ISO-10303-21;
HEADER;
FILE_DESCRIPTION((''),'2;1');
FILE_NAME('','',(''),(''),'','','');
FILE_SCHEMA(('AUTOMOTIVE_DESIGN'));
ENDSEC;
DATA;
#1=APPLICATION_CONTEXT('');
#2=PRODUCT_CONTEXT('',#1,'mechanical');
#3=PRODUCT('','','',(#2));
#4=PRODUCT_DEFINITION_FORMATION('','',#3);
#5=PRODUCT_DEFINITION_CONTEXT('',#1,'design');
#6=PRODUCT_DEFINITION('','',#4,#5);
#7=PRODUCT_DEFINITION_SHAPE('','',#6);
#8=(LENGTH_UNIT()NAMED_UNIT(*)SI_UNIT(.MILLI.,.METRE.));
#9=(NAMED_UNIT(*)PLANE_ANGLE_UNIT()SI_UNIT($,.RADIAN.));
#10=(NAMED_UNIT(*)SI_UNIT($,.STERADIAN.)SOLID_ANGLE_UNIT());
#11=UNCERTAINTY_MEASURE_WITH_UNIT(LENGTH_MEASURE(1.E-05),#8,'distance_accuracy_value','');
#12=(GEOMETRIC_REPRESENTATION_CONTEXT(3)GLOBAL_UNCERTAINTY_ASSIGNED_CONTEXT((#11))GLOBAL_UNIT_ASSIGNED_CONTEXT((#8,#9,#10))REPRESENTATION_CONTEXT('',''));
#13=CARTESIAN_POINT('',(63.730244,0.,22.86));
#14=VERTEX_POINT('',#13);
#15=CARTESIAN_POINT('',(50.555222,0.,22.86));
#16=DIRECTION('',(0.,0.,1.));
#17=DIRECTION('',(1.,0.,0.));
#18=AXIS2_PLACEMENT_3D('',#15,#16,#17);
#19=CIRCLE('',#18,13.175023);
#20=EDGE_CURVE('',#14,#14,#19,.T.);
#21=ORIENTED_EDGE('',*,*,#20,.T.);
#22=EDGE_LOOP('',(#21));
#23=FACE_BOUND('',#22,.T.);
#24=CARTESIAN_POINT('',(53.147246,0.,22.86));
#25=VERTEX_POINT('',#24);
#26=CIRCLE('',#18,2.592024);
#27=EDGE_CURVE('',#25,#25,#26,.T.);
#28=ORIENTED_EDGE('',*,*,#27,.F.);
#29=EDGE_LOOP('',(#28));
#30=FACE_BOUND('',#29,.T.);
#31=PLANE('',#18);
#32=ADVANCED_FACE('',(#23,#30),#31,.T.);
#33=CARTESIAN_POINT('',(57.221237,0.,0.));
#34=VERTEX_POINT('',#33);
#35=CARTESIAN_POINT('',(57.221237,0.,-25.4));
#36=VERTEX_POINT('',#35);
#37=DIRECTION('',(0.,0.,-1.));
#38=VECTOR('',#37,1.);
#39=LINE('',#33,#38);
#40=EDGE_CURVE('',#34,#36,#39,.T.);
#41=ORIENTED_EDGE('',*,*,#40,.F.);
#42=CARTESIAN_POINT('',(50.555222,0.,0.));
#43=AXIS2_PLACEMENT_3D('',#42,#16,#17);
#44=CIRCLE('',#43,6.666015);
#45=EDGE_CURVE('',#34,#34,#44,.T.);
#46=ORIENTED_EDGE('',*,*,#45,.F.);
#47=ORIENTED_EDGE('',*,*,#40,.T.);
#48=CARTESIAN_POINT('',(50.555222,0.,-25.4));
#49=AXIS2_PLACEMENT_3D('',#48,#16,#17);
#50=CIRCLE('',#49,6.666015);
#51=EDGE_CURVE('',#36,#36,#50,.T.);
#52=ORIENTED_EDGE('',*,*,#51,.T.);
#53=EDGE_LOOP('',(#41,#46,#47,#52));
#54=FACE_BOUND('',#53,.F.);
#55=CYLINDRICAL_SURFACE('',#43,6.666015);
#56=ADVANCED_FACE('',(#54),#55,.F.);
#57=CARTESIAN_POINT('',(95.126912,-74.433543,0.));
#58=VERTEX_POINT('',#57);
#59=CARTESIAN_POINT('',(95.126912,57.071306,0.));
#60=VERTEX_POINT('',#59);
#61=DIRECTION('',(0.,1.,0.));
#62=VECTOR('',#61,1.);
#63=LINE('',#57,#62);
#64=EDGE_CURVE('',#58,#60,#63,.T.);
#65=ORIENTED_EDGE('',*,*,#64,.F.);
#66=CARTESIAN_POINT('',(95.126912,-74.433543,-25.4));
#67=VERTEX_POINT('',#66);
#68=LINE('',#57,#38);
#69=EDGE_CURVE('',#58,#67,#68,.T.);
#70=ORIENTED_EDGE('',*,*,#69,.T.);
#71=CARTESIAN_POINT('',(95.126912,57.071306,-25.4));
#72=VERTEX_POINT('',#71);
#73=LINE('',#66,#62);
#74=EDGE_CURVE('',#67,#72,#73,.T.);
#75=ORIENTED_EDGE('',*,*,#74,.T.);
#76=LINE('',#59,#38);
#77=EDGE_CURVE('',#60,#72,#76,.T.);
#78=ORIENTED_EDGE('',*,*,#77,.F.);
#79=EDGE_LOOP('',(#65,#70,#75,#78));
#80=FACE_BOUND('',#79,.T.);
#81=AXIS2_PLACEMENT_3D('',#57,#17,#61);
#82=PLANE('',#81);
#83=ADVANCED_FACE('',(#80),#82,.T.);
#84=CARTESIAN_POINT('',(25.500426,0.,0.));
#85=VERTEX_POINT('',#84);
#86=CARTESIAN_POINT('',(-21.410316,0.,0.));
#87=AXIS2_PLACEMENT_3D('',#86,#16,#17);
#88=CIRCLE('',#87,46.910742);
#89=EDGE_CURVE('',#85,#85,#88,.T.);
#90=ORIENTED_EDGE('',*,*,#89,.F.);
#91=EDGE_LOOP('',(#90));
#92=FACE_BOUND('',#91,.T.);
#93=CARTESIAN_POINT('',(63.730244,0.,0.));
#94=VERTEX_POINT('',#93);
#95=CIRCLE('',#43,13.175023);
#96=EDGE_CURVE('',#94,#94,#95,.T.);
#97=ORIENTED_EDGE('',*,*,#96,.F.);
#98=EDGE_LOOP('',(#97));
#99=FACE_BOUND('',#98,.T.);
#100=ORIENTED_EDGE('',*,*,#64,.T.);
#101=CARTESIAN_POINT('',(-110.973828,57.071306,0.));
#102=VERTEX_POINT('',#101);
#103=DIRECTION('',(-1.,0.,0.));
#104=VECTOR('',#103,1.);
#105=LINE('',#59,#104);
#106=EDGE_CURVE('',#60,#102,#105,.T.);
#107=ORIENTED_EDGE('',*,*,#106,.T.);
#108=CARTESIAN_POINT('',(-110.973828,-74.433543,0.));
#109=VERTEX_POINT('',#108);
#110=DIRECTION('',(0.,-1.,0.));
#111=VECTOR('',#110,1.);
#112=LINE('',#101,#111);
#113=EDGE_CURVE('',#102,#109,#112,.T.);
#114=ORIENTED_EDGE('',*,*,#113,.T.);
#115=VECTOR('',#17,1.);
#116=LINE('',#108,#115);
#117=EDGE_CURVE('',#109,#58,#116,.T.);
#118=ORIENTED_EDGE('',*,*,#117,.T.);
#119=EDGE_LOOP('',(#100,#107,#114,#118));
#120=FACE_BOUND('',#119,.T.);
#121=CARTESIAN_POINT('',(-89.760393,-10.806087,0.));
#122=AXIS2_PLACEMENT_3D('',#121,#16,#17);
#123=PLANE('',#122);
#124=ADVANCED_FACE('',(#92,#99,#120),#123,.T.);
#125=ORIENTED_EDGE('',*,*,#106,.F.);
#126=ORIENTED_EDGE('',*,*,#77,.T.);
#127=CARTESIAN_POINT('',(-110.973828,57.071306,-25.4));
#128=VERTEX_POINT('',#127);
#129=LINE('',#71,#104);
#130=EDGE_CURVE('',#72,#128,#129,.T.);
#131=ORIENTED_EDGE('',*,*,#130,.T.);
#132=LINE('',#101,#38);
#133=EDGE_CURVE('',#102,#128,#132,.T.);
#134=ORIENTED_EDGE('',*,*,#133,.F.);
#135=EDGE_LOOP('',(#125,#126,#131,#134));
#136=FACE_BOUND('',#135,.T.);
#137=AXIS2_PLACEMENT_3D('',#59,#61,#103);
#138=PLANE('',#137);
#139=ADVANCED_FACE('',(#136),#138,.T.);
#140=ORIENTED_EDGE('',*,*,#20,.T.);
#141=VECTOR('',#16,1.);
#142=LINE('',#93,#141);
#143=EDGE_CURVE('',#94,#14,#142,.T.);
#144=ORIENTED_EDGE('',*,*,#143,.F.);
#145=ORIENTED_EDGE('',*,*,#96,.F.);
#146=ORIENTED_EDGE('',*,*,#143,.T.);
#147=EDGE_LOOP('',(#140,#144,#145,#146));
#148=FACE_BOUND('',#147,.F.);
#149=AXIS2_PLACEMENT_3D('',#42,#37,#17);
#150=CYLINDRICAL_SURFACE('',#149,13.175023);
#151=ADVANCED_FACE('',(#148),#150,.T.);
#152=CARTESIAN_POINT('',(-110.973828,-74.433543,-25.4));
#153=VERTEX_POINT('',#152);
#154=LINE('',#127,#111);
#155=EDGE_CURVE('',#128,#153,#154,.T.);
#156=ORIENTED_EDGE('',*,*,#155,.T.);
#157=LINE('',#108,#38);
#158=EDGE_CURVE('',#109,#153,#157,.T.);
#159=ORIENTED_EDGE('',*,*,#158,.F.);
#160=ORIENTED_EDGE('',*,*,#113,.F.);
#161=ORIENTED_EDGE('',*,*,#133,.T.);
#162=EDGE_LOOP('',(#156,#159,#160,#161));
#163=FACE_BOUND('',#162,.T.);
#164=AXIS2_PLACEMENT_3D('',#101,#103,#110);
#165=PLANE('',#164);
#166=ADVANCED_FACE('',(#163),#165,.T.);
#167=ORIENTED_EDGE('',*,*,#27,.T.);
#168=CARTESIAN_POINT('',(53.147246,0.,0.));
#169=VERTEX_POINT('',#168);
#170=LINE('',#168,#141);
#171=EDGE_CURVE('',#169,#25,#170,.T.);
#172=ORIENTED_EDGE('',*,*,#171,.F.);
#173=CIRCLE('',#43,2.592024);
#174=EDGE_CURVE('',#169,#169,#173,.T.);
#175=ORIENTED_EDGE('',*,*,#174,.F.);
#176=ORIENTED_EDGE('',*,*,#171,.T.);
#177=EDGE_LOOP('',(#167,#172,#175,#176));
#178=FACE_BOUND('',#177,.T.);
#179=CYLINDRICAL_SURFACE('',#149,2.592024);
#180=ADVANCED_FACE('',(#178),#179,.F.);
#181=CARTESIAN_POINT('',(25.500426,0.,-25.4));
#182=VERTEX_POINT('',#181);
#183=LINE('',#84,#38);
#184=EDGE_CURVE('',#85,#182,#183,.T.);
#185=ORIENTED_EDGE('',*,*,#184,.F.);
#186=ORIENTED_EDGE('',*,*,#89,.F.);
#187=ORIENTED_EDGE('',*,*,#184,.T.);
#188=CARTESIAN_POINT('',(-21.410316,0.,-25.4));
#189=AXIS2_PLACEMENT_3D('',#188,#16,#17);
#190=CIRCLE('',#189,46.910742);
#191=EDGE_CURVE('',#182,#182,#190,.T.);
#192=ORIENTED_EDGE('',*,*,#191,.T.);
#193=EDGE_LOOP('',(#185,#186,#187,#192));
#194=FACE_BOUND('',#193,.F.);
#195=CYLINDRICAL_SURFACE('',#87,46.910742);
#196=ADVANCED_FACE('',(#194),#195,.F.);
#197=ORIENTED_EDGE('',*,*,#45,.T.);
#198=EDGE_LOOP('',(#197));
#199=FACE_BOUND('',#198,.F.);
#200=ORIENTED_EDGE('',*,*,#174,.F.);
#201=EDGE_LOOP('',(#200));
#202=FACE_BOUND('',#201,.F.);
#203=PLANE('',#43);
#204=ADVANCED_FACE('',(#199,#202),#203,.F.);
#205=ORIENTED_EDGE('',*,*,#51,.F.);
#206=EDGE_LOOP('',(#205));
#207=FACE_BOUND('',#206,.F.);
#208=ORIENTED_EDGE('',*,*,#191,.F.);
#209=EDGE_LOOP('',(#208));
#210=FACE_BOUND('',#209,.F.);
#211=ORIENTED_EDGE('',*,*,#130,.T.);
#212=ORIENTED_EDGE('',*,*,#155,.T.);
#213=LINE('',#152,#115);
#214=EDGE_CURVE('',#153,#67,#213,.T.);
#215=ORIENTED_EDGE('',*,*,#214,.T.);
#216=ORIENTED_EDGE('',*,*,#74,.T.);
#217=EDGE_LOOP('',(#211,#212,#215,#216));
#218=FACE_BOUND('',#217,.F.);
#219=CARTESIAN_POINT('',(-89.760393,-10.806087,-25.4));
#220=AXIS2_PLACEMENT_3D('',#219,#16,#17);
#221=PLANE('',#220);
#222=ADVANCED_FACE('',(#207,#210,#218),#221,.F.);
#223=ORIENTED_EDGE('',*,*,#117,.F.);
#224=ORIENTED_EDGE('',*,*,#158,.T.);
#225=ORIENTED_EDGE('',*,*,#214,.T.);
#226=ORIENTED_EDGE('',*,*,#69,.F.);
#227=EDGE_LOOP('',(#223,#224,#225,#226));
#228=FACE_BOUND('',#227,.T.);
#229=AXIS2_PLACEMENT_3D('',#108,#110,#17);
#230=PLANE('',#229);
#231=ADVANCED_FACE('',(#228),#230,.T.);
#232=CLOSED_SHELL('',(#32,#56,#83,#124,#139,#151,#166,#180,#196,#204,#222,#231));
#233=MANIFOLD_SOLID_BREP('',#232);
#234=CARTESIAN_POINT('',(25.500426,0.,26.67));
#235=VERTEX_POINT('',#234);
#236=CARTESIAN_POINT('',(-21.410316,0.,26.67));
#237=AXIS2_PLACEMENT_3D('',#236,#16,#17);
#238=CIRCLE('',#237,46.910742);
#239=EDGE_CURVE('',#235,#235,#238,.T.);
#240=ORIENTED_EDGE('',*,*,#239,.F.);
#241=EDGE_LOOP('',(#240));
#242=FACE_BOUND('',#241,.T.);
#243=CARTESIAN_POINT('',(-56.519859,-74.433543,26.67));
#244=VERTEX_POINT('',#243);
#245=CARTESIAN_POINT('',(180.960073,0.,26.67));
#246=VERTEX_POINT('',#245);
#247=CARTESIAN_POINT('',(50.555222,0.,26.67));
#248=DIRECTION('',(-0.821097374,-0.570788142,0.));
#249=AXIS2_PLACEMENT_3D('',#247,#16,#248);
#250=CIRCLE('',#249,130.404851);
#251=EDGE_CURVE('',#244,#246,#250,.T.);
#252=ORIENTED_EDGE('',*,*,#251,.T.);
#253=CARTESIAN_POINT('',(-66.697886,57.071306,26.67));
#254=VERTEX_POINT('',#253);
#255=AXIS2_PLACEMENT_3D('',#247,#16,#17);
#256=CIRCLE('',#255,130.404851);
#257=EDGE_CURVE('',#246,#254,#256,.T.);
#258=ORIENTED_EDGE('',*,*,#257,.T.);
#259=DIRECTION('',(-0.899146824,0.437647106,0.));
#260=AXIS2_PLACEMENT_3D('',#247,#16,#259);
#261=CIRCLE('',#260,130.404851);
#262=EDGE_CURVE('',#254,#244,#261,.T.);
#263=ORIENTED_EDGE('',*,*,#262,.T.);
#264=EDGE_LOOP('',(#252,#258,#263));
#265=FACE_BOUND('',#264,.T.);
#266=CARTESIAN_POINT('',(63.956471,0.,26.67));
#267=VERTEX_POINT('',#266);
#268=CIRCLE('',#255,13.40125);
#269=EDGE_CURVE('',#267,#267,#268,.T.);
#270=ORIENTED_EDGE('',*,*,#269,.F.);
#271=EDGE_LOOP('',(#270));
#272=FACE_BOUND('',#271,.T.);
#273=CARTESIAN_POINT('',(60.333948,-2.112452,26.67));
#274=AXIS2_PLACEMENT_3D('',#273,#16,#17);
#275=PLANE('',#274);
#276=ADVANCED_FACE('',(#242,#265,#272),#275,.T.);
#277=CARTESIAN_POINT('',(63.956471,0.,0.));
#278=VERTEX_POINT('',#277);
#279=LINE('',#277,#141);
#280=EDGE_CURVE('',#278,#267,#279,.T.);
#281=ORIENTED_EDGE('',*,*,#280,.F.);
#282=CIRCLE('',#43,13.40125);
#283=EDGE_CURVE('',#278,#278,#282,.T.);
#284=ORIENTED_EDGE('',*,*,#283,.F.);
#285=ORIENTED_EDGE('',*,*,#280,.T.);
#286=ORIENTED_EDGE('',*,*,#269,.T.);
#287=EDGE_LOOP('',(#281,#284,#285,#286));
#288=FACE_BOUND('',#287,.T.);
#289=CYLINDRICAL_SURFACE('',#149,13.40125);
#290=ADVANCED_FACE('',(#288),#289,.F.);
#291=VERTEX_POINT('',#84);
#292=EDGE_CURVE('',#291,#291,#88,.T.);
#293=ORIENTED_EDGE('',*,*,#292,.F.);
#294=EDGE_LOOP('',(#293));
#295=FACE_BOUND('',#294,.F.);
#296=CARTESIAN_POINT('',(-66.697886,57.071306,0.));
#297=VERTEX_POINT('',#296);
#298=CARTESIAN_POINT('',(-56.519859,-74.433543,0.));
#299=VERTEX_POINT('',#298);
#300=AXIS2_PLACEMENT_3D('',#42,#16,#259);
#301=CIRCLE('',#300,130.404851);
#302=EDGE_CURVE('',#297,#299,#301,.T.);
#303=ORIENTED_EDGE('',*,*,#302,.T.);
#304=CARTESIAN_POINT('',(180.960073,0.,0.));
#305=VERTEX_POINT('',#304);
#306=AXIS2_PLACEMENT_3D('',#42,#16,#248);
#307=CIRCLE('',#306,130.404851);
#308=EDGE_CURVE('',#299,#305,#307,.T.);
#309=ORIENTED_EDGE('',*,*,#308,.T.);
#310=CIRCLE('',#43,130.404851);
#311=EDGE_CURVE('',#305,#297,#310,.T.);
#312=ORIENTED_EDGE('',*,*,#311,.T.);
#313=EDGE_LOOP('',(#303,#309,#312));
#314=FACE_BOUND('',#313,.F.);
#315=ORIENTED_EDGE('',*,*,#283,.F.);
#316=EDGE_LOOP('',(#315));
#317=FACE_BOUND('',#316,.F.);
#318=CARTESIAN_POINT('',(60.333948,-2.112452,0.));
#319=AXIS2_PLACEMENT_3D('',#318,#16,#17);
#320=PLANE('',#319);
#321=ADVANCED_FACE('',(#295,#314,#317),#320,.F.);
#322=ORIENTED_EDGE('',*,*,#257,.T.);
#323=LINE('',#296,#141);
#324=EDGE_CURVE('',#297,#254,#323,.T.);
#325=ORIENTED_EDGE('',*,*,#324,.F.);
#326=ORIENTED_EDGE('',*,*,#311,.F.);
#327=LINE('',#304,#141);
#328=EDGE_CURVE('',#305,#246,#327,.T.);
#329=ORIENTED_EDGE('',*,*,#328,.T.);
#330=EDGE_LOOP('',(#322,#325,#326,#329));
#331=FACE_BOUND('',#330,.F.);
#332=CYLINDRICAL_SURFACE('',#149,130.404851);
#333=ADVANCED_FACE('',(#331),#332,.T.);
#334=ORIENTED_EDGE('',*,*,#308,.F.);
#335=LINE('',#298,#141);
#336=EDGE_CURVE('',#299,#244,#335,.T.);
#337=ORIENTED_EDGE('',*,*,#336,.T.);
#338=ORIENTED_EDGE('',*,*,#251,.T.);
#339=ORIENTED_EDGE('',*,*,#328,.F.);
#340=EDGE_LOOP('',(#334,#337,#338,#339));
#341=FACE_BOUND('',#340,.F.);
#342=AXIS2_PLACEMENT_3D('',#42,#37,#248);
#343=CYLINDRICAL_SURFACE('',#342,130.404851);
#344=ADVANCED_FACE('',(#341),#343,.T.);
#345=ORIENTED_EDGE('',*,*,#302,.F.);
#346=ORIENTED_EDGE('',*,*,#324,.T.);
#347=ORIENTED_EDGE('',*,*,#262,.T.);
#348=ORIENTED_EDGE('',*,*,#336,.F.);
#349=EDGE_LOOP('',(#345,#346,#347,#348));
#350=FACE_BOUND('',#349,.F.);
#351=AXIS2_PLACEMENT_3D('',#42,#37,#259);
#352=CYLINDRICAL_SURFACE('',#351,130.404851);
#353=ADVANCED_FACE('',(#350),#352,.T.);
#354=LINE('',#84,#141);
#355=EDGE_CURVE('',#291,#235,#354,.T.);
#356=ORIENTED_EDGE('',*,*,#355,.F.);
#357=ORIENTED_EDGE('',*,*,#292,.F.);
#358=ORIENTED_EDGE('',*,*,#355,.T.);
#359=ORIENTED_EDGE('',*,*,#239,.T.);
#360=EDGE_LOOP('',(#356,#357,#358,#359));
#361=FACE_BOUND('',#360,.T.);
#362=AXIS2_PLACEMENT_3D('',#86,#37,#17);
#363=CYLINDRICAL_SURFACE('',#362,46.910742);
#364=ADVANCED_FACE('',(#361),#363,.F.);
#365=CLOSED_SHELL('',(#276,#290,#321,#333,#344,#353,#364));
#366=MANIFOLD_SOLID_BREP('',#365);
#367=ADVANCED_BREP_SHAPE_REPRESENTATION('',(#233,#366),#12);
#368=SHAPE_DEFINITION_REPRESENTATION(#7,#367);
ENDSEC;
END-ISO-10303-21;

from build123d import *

# Parameters (mm, degrees)
F0_R     = 46.9107423569
F0_R_2   = 13.401249698
F1_DEPTH = 26.67
F0_R_3   = 13.1750226466
F0_R_4   = 6.6660151199
F2_DEPTH = 25.4
F0_R_5   = 2.5920243027
F3_DEPTH = 22.86


with BuildPart() as f1:
    # F0 (on Top) → F1 (new body)
    with BuildSketch(Plane.XY):
        with BuildLine():
            ThreePointArc((180.9600731002, 0), (79.8387593607, 127.0743864177), (-66.6978861635, 57.0713058114))
            Line((-66.6978861635, 57.0713058114), (95.1269119978, 57.0713058114))
            Line((95.1269119978, 57.0713058114), (95.1269119978, -74.433542788))
            Line((95.1269119978, -74.433542788), (-56.5198592453, -74.433542788))
            ThreePointArc((-56.5198592453, -74.433542788), (89.5572424471, -124.4357972599), (180.9600731002, 0))
        make_face()
        with BuildLine():
            Line((95.1269119978, 57.0713058114), (-66.6978861635, 57.0713058114))
            ThreePointArc((-66.6978861635, 57.0713058114), (-79.4607979805, -10.0627966389), (-56.5198592453, -74.433542788))
            Line((-56.5198592453, -74.433542788), (95.1269119978, -74.433542788))
            Line((95.1269119978, -74.433542788), (95.1269119978, 57.0713058114))
        make_face()
        with Locations((-21.4103162289, 0)):
            Circle(F0_R, mode=Mode.SUBTRACT)
        with Locations((50.5552217364, 0)):
            Circle(F0_R_2, mode=Mode.SUBTRACT)
    extrude(amount=F1_DEPTH)


with BuildPart() as f2:
    # F0 (on Top) → F2 (new body)
    with BuildSketch(Plane.XY):
        with BuildLine():
            Line((-66.6978861635, 57.0713058114), (-110.9738275409, 57.0713058114))
            Line((-110.9738275409, 57.0713058114), (-110.9738275409, -74.433542788))
            Line((-110.9738275409, -74.433542788), (-56.5198592453, -74.433542788))
            ThreePointArc((-56.5198592453, -74.433542788), (-79.4607979805, -10.0627966389), (-66.6978861635, 57.0713058114))
        make_face()
        with BuildLine():
            Line((95.1269119978, 57.0713058114), (-66.6978861635, 57.0713058114))
            ThreePointArc((-66.6978861635, 57.0713058114), (-79.4607979805, -10.0627966389), (-56.5198592453, -74.433542788))
            Line((-56.5198592453, -74.433542788), (95.1269119978, -74.433542788))
            Line((95.1269119978, -74.433542788), (95.1269119978, 57.0713058114))
        make_face()
        with Locations((-21.4103162289, 0)):
            Circle(F0_R, mode=Mode.SUBTRACT)
        with Locations((50.5552217364, 0)):
            Circle(F0_R_2, mode=Mode.SUBTRACT)
        with Locations((50.5552217364, 0)):
            Circle(F0_R_2)
        with Locations((50.5552217364, 0)):
            Circle(F0_R_3, mode=Mode.SUBTRACT)
        with Locations((50.5552217364, 0)):
            Circle(F0_R_3)
        with Locations((50.5552217364, 0)):
            Circle(F0_R_4, mode=Mode.SUBTRACT)
    extrude(amount=-F2_DEPTH)

    # F0 (on Top) → F3 (join)
    with BuildSketch(Plane.XY):
        with Locations((50.5552217364, 0)):
            Circle(F0_R_3)
        with Locations((50.5552217364, 0)):
            Circle(F0_R_4, mode=Mode.SUBTRACT)
        with Locations((50.5552217364, 0)):
            Circle(F0_R_4)
        with Locations((50.5552217364, 0)):
            Circle(F0_R_5, mode=Mode.SUBTRACT)
    extrude(amount=F3_DEPTH)


solid = Compound([f1.part, f2.part])
